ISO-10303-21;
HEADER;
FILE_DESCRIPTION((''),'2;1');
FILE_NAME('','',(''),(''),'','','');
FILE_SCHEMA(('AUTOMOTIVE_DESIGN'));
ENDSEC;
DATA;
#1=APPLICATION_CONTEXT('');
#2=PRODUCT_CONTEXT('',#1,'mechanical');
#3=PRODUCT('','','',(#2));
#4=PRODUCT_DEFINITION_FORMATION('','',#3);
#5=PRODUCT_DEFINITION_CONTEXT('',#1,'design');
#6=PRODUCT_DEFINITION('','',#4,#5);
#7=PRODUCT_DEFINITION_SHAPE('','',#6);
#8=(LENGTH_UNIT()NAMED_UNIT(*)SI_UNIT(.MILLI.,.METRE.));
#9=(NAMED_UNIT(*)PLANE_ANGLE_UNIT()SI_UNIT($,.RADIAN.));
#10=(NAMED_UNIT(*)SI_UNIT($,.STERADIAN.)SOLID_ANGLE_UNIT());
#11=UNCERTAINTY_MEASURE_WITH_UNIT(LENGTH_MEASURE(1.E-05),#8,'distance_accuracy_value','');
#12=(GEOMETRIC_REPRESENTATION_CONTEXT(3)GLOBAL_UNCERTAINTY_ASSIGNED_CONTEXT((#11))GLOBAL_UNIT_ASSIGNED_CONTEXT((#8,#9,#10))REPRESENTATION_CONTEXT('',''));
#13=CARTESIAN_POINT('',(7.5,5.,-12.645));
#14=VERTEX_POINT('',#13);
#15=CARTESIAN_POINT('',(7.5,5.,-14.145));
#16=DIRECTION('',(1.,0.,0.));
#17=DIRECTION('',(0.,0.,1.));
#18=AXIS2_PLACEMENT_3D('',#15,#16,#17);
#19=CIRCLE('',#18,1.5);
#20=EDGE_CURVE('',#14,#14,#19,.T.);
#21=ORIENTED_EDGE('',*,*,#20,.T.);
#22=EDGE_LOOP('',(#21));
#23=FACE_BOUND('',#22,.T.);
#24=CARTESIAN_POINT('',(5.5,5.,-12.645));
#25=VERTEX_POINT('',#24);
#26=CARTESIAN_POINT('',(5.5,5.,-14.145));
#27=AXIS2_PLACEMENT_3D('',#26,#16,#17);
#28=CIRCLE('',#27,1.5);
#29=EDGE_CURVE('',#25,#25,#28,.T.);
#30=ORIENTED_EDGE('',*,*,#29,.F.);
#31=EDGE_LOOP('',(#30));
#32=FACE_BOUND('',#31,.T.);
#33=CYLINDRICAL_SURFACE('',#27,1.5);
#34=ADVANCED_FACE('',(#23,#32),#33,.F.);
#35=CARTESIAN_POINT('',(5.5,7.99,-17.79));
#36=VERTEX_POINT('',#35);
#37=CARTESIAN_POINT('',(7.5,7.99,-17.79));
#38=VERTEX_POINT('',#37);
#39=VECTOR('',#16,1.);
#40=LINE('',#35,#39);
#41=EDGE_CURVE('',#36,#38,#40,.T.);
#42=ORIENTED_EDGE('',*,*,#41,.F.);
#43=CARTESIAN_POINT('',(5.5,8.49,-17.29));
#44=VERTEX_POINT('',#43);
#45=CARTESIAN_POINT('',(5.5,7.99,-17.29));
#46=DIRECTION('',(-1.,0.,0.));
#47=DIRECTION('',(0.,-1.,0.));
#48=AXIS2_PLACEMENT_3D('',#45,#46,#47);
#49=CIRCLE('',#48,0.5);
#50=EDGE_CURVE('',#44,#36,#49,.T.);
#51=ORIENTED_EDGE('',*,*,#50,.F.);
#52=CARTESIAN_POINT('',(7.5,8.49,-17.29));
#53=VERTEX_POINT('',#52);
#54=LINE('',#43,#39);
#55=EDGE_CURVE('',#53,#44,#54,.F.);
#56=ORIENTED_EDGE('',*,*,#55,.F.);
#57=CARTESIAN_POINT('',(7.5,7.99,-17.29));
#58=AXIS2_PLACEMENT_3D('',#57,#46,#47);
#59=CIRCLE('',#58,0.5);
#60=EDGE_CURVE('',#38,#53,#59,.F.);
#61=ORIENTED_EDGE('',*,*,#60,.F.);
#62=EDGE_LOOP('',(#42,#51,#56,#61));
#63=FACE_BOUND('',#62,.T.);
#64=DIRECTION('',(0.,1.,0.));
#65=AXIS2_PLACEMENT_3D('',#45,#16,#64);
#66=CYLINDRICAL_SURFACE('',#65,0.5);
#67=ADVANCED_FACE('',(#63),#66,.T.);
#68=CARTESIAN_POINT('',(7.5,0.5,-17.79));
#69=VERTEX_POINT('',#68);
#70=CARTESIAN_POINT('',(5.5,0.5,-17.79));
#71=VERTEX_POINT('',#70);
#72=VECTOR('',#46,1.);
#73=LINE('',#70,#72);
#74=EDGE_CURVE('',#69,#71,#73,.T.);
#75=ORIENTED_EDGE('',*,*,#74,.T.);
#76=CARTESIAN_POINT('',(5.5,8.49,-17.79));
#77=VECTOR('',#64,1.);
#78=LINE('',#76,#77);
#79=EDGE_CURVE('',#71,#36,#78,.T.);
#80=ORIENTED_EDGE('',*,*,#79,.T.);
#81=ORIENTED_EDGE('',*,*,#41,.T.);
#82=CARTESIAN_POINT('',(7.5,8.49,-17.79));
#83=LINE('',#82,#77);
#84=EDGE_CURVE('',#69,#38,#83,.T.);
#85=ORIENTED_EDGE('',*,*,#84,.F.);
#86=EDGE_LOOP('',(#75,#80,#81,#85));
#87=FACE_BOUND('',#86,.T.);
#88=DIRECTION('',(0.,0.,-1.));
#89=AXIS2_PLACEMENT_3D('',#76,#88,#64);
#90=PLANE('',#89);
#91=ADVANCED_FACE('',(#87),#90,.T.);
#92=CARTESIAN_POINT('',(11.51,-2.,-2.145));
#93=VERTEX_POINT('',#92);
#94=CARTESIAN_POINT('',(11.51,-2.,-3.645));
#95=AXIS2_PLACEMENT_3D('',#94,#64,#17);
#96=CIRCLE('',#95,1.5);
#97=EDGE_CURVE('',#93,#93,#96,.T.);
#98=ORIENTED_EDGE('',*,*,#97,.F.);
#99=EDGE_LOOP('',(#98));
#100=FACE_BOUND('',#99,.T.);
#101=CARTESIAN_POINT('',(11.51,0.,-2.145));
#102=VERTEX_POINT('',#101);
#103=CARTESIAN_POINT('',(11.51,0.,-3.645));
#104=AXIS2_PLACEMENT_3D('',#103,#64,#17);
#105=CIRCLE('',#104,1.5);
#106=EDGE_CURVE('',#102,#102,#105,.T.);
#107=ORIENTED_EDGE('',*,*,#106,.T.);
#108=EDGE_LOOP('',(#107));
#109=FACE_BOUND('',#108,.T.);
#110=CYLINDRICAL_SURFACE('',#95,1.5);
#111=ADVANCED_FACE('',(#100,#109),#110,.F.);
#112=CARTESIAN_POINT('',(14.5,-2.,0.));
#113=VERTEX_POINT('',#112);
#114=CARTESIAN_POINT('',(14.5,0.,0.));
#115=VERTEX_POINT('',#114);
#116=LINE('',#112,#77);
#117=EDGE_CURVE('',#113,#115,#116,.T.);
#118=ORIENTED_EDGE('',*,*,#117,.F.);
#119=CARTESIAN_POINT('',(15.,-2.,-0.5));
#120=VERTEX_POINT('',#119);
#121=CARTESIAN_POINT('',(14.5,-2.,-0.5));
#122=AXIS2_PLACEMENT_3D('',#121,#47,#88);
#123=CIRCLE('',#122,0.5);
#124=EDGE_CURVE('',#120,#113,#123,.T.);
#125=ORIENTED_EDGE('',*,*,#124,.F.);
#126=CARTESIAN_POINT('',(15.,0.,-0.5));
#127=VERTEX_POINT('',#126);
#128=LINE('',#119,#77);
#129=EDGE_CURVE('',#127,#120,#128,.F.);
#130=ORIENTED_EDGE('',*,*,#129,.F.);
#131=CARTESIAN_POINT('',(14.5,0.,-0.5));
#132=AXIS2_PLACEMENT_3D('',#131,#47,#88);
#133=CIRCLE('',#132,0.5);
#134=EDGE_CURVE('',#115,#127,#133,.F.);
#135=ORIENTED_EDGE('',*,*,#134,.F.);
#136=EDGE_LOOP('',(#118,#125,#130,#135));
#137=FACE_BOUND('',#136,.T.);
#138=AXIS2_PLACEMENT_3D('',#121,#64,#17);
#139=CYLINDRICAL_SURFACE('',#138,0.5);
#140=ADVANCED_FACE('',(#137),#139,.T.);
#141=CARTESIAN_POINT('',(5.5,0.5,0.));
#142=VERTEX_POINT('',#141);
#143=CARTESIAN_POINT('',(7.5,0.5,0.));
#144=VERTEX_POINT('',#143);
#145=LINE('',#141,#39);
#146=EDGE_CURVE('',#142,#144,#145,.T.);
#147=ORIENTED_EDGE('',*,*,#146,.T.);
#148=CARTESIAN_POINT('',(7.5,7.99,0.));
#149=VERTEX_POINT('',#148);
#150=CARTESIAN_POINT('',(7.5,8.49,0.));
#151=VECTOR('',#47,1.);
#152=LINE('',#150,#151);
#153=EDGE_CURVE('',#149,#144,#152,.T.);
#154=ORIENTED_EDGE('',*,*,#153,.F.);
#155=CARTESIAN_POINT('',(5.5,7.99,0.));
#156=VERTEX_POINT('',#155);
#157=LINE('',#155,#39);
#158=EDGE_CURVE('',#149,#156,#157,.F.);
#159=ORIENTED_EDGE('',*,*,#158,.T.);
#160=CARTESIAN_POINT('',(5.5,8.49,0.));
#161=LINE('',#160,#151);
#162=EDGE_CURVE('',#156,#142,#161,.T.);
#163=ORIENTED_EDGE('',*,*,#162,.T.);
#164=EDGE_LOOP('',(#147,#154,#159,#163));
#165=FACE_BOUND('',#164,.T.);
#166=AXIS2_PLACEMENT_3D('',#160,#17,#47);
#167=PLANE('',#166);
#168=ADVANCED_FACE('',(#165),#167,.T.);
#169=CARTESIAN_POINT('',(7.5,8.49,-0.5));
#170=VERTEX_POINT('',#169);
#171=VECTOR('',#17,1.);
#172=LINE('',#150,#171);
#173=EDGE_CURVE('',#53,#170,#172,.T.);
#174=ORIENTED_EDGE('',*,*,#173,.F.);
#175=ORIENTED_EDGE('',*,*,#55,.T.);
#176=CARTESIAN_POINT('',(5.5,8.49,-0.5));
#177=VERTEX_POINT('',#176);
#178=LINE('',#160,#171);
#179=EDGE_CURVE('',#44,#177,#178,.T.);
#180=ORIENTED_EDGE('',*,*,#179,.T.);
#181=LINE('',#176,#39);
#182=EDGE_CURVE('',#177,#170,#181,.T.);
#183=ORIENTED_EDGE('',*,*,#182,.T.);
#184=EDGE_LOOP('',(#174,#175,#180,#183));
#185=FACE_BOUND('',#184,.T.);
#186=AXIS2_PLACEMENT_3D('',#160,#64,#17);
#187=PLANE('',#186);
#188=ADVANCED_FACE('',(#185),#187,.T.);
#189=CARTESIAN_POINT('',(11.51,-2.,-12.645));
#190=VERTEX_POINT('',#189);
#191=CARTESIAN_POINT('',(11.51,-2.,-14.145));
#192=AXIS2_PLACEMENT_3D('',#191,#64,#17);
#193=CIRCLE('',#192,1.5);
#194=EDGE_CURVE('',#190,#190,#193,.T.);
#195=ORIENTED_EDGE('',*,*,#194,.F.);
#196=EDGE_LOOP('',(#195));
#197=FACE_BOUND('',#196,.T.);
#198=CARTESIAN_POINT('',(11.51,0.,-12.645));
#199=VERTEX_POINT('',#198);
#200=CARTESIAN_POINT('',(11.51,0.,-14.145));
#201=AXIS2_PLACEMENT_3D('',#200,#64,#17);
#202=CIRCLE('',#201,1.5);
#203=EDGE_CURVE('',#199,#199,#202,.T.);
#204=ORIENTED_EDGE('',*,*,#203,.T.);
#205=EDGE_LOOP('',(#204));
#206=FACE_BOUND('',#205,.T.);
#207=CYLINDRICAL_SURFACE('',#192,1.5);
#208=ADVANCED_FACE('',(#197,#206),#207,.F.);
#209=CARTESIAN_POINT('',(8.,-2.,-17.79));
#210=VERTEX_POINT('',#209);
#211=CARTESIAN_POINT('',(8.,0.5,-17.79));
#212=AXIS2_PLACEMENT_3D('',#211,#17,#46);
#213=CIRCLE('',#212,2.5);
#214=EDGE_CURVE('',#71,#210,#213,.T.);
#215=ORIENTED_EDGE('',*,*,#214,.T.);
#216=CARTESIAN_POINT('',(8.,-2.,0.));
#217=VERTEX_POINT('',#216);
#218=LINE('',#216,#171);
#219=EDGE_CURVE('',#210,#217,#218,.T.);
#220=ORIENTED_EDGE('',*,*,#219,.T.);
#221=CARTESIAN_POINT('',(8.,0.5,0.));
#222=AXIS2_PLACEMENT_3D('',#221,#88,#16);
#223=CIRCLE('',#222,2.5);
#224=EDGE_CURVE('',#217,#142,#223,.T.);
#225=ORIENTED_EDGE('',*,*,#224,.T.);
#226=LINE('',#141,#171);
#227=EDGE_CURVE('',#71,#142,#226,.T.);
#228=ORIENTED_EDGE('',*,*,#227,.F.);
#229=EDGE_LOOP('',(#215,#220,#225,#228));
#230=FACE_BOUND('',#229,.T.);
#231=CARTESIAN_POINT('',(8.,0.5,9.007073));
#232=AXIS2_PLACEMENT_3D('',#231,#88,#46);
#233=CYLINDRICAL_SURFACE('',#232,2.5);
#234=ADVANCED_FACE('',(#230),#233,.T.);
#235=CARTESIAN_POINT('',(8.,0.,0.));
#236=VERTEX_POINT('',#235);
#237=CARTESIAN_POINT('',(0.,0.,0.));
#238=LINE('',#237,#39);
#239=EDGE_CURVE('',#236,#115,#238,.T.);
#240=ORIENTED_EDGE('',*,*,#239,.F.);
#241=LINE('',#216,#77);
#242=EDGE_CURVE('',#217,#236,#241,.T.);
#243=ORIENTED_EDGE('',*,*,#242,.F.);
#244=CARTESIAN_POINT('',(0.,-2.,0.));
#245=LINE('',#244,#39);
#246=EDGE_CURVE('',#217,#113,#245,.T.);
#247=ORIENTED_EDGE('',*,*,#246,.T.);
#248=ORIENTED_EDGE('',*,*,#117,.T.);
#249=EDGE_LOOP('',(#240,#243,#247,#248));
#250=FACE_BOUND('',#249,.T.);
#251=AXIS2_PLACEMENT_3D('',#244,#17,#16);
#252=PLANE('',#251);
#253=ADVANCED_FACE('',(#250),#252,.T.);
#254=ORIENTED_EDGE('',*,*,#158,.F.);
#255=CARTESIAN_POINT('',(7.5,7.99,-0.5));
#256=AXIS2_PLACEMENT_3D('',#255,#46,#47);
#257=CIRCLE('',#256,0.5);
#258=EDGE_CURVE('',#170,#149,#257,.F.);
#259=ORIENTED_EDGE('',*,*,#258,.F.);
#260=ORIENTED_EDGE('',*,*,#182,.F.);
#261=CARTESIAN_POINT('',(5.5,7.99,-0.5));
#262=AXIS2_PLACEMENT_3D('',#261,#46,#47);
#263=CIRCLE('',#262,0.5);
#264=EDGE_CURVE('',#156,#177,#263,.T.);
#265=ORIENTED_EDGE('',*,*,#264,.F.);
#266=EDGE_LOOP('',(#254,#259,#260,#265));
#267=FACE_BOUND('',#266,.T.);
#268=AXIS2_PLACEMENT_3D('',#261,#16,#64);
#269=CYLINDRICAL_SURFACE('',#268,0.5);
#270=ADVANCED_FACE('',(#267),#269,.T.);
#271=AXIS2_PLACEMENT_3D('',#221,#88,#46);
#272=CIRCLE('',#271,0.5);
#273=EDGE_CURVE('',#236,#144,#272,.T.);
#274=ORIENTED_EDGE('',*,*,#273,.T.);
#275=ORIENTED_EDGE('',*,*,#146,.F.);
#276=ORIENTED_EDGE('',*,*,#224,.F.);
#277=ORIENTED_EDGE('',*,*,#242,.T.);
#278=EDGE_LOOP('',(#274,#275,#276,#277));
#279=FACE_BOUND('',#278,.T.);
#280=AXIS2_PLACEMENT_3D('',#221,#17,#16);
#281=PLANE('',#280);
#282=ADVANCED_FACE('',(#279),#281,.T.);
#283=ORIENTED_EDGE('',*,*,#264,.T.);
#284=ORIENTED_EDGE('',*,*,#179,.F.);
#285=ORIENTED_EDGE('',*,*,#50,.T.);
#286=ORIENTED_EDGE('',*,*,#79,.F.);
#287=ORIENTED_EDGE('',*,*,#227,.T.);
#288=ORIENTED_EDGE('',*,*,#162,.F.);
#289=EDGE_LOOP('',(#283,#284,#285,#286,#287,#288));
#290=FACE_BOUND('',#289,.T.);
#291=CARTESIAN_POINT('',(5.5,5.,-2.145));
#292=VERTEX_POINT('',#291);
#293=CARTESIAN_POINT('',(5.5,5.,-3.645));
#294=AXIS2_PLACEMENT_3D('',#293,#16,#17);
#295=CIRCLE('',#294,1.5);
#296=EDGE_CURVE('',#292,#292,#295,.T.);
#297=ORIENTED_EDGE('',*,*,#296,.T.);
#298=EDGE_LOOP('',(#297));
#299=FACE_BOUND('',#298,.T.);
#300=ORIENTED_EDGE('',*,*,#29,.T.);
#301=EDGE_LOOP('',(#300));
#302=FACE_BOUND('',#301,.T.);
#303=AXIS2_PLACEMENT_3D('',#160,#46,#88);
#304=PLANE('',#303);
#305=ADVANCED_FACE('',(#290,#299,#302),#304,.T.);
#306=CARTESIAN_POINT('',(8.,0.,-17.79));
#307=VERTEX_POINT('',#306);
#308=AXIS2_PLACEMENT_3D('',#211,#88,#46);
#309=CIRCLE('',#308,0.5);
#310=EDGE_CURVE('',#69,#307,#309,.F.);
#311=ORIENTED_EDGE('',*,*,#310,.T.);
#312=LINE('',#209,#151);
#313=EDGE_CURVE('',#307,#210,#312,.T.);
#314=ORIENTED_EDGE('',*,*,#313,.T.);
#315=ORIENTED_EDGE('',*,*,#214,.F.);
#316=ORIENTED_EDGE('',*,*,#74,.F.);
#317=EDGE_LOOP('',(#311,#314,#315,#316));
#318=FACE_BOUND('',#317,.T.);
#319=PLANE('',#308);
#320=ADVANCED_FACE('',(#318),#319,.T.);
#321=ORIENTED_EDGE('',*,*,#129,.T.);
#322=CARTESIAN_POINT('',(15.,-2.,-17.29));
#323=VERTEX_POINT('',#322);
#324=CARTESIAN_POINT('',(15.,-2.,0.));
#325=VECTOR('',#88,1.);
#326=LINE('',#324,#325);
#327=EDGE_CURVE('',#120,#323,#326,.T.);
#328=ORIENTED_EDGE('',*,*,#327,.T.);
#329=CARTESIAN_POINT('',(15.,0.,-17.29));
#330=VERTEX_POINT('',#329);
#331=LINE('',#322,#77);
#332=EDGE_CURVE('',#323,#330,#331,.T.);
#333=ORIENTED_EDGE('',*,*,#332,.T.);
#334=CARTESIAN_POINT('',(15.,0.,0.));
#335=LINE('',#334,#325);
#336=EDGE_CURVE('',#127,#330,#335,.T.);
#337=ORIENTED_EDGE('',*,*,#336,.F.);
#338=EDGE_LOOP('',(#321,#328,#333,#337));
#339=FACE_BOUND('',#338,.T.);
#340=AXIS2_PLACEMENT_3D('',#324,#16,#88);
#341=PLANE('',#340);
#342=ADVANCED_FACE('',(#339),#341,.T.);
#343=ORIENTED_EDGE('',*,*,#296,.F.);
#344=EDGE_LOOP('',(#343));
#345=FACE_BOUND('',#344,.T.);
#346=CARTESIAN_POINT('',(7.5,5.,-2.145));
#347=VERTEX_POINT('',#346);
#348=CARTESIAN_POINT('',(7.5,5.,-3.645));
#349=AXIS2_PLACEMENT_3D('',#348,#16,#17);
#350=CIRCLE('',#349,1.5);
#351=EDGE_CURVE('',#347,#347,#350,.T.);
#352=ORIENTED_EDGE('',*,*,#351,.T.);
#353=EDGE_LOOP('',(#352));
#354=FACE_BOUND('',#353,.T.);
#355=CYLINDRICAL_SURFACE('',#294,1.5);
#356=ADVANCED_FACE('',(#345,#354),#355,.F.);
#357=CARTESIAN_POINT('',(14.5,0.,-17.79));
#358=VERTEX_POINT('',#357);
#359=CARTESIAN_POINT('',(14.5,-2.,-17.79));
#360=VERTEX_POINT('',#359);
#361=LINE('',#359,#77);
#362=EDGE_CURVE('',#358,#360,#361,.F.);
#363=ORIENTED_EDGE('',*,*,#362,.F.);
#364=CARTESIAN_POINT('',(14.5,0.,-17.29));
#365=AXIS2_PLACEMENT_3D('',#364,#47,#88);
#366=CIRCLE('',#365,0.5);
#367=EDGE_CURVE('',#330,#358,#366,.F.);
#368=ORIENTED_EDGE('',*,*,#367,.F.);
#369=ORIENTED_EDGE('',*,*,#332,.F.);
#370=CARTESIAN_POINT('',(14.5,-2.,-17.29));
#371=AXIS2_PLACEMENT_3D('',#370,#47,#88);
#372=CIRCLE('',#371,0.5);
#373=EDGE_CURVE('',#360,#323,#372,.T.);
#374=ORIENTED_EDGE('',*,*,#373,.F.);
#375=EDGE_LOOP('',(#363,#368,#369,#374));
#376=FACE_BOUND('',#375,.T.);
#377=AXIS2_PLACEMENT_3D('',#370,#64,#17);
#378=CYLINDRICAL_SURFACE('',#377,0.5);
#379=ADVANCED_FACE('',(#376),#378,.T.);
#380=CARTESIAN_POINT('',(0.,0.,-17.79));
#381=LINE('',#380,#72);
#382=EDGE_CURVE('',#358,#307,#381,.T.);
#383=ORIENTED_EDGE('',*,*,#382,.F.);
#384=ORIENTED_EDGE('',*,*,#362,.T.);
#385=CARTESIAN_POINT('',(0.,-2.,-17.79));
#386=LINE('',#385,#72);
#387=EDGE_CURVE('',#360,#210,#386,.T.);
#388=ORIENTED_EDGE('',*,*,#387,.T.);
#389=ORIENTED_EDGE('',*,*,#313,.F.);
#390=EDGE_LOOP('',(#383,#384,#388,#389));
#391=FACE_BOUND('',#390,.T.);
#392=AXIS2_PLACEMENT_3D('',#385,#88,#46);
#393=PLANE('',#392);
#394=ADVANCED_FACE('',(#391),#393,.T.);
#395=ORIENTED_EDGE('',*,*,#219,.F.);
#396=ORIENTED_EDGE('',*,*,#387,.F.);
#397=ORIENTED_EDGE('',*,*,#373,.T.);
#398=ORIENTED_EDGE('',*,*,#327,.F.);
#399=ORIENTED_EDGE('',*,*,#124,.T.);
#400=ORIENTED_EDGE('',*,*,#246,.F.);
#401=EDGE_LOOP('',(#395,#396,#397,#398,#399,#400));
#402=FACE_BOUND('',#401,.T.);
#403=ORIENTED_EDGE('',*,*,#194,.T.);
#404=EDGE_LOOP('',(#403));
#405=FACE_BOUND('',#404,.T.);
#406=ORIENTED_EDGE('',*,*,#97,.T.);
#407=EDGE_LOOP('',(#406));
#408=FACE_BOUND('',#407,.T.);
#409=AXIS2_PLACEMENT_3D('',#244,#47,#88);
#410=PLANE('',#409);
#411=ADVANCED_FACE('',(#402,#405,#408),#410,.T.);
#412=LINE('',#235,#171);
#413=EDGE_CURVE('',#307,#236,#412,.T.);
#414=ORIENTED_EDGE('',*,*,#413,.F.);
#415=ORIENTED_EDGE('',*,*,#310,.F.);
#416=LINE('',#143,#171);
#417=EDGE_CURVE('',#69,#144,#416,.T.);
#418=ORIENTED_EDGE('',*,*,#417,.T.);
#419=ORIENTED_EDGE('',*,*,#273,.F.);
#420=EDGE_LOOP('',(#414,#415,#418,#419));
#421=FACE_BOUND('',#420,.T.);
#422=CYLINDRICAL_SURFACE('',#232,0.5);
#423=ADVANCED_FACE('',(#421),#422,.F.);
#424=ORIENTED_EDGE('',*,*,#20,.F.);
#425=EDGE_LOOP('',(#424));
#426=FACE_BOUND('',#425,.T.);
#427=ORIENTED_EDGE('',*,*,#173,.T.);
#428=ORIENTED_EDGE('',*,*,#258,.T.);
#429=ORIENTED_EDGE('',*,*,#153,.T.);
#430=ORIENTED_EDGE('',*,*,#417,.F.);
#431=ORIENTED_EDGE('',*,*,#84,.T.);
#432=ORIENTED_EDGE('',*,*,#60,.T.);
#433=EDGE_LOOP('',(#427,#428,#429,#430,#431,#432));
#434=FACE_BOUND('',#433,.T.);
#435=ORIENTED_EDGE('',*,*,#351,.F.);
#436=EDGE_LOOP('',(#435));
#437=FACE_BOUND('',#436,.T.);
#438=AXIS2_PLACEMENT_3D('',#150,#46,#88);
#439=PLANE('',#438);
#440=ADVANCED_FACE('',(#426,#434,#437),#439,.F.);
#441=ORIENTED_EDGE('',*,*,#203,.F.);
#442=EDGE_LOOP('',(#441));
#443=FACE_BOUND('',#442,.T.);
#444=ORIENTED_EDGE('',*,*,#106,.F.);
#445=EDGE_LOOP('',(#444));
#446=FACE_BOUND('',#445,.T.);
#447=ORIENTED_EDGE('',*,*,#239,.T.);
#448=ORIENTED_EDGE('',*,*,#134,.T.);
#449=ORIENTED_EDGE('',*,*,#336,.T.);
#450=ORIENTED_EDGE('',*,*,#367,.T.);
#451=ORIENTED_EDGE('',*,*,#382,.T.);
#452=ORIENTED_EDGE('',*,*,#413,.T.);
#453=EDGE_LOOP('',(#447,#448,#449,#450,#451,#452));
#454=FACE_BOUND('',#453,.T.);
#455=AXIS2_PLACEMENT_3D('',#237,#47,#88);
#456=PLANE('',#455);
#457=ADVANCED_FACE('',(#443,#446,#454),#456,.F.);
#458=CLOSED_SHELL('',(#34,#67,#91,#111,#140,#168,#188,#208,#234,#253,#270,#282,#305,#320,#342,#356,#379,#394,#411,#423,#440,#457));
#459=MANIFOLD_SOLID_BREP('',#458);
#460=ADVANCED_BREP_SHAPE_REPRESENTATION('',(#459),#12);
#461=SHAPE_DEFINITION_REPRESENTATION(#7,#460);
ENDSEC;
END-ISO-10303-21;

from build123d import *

# Parameters (mm, degrees)
SKETCH2_W                  = 15
SKETCH2_H                  = 17.79
SKETCH2_R                  = 1.5
BASE_FLANGE1_DEPTH         = 2
SKETCHED_BEND6_OUTLINE_W   = 2
SKETCHED_BEND6_OUTLINE_H   = 17.79
SKETCHED_BEND6_DEPTH       = 5.5
SKETCHED_START             = 5.74315
SKETCHED_BEND6_2_OUTLINE_W = 8.49
SKETCHED_BEND6_2_OUTLINE_H = 17.79
SKETCHED_BEND6_2_OUTLINE_R = 1.5
SKETCHED_BEND6_2_DEPTH     = 1.75685
SKETCHED_START_2           = 5.5
SKETCHED_BEND6_3_OUTLINE_W = 8.49
SKETCHED_BEND6_3_OUTLINE_H = 17.79
SKETCHED_BEND6_3_OUTLINE_R = 1.5
SKETCHED_BEND6_3_DEPTH     = 2.5
SKETCHED_START_3           = -17.79
SKETCHED_BEND6_4_DEPTH     = 17.79
FILLET1_R                  = 0.5


with BuildPart() as part:
    # Base-Flange1: sheet metal written as solids
    # Sketch2 → Base-Flange1 (new body)
    with BuildSketch(Plane(origin=(0, 0, 0), x_dir=(1, 0, 0), z_dir=(0, 1, 0))):
        with Locations((7.5, 8.895)):
            Rectangle(SKETCH2_W, SKETCH2_H)
        with Locations(Location((11.51, 14.145, 0), (0, 0, 270))):
            Circle(SKETCH2_R, mode=Mode.SUBTRACT)
        with Locations(Location((11.51, 3.645, 0), (0, 0, 270))):
            Circle(SKETCH2_R, mode=Mode.SUBTRACT)
        with Locations(Location((3.49, 3.645, 0), (0, 0, 270))):
            Circle(SKETCH2_R, mode=Mode.SUBTRACT)
        with Locations(Location((3.49, 14.145, 0), (0, 0, 270))):
            Circle(SKETCH2_R, mode=Mode.SUBTRACT)
    extrude(amount=-BASE_FLANGE1_DEPTH)

    # Sketched Bend6: read off the stored shape, not the designer's step
    # Sketched Bend6 outline → Sketched Bend6 (cut)
    with BuildSketch(Plane.YZ):
        with Locations((-1, -8.895)):
            Rectangle(SKETCHED_BEND6_OUTLINE_W, SKETCHED_BEND6_OUTLINE_H)
    extrude(amount=SKETCHED_BEND6_DEPTH, mode=Mode.SUBTRACT)

    # Sketched Bend6 2 outline → Sketched Bend6 2 (add)
    with BuildSketch(Plane.YZ.offset(SKETCHED_START)):
        with Locations((4.245, -8.895)):
            Rectangle(SKETCHED_BEND6_2_OUTLINE_W, SKETCHED_BEND6_2_OUTLINE_H)
        with Locations((5, -14.145)):
            Circle(SKETCHED_BEND6_2_OUTLINE_R, mode=Mode.SUBTRACT)
        with Locations((5, -3.645)):
            Circle(SKETCHED_BEND6_2_OUTLINE_R, mode=Mode.SUBTRACT)
    extrude(amount=SKETCHED_BEND6_2_DEPTH)

    # Sketched Bend6 3 outline → Sketched Bend6 3 (add)
    with BuildSketch(Plane.YZ.offset(SKETCHED_START_2)):
        with Locations((4.245, -8.895)):
            Rectangle(SKETCHED_BEND6_3_OUTLINE_W, SKETCHED_BEND6_3_OUTLINE_H)
        with Locations((5, -14.145)):
            Circle(SKETCHED_BEND6_3_OUTLINE_R, mode=Mode.SUBTRACT)
        with Locations((5, -3.645)):
            Circle(SKETCHED_BEND6_3_OUTLINE_R, mode=Mode.SUBTRACT)
    extrude(amount=SKETCHED_BEND6_3_DEPTH)

    # Sketched Bend6 4 outline → Sketched Bend6 4 (cut)
    with BuildSketch(Plane.XY.offset(SKETCHED_START_3)):
        with BuildLine():
            Line((8, 8.49), (7.5, 8.49))
            Line((7.5, 8.49), (7.5, 0.5))
            ThreePointArc((7.5, 0.5), (7.646446609, 0.146446609), (8, 0))
            Line((8, 0), (8, 8.49))
        make_face()
        with BuildLine():
            ThreePointArc((8, -2), (6.232233047, -1.267766953), (5.5, 0.5))
            Line((5.5, 0.5), (5.5, -2))
            Line((5.5, -2), (8, -2))
        make_face()
    extrude(amount=SKETCHED_BEND6_4_DEPTH, mode=Mode.SUBTRACT)

    # Fillet1
    fillet1_edges = [part.edges().sort_by_distance(p)[0] for p in [
        (15, -1, -17.79),
        (15, -1, 0),
        (6.5, 8.49, -17.79),
        (6.5, 8.49, 0),
    ]]
    fillet(fillet1_edges, radius=FILLET1_R)


solid = part.part
